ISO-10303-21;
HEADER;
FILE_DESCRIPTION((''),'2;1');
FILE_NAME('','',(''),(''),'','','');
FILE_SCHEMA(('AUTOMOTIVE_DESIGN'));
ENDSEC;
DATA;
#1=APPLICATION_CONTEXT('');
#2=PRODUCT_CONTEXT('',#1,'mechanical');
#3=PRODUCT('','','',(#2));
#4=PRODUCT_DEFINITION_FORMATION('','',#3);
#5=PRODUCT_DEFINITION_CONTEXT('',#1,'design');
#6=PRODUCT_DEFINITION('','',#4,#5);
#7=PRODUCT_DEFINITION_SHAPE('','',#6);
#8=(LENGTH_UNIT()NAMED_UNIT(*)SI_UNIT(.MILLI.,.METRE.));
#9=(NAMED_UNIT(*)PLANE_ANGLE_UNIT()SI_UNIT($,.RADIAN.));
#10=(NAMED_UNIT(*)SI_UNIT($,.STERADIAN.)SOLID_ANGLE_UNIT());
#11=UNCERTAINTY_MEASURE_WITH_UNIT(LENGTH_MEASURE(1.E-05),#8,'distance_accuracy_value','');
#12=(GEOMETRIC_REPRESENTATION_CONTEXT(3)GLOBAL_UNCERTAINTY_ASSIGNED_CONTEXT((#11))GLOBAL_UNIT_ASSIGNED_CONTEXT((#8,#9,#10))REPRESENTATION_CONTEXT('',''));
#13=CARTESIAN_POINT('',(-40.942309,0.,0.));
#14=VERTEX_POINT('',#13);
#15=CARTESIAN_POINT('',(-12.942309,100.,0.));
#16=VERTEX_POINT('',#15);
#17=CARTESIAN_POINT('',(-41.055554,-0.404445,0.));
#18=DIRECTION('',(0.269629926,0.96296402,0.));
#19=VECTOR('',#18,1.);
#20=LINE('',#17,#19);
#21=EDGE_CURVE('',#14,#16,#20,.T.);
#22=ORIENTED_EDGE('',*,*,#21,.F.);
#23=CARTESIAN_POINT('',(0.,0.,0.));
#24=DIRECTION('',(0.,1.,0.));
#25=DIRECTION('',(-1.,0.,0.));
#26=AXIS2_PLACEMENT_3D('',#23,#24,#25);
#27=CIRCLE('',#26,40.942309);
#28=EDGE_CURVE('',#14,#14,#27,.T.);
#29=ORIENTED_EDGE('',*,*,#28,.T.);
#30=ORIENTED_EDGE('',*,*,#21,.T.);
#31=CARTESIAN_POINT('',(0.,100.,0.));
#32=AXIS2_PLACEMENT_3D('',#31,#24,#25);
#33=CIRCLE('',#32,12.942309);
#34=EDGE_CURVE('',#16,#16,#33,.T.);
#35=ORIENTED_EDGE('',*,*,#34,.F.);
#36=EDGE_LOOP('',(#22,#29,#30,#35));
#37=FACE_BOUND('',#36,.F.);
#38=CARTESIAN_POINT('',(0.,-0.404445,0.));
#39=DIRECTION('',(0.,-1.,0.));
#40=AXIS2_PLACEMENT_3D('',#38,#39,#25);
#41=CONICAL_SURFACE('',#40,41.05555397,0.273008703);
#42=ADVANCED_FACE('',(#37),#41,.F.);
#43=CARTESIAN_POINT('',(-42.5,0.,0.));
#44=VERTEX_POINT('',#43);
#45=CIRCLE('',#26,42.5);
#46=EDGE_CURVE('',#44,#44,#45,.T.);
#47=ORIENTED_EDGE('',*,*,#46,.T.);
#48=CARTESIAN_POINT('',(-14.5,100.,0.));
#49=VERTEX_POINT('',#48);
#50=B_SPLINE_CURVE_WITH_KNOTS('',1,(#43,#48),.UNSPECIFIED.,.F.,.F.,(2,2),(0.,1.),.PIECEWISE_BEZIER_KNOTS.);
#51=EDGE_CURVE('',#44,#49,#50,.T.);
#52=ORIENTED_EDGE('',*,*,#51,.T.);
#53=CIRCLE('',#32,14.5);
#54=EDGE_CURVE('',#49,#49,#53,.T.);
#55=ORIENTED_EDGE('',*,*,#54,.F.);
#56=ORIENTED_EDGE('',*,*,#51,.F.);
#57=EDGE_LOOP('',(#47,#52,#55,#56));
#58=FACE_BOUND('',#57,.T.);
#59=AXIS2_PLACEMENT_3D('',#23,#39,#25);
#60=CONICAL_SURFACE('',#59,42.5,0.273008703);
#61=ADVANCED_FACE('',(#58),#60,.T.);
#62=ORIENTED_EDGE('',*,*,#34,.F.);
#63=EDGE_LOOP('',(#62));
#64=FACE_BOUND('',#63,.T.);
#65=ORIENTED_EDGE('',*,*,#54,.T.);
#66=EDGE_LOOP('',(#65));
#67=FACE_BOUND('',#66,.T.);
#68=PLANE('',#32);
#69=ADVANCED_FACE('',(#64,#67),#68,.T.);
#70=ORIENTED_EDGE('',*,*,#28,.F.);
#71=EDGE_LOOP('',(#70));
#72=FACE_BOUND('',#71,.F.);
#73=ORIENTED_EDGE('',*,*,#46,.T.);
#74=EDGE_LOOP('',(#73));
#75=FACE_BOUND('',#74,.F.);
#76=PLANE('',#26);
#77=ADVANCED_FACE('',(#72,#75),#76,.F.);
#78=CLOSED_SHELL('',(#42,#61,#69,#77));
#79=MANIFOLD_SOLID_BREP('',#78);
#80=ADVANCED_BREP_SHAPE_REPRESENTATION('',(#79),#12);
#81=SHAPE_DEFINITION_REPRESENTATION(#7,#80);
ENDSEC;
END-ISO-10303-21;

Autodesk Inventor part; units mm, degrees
ref_plane "YZ Plane" through (0, 0, 0) normal (1, 0, 0) x (0, 1, 0)
ref_plane "XY Plane" through (0, 0, 0) normal (0, 0, 1) x (1, 0, 0)
sketch "Szkic6" plane through (0, 0, 0) normal (0, 1, 0) x (-1, 0, 0)
  circle A0 centre (0, 0) radius 42.5
  dimension "d33" = 85
ref_plane "Płaszczyzna konstrukcyjna1" through (0, 100, 0) normal (0, 1, 0) x (-1, 0, 0)
sketch "Szkic7" plane through (0, 100, 0) normal (0, 1, 0) x (-1, 0, 0)
  circle A0 centre (0, 0) radius 14.5
  dimension "d35" = 29
loft "Wyciągnięcie złożone1" add profiles "Szkic6", "Szkic7"
shell "Skorupa1" thickness 1.5 removed faces 2 at (1.052, 100, -3.5603) at (10.6049, 0, 7.3037)
equation "\"d33\" = OD1"
equation "\"d35\" = OD2"
equation "\"d52\" = THK"
equation "\"SzerokośćGięciaPodcięcia\" = Grubość"
equation "\"RozmiarPodcięciaNarożnika\" = 4 * Grubość"
equation "\"PromieńPrzejścia\" = PromieńGięcia"
equation "\"Rozmiar_promienia_Jacobiego\" = PromieńGięcia"
equation "\"Wielk_odstępu\" = Grubość"
equation "\"d2\" = PromieńGięcia"
equation "\"d23\" = PromieńGięcia"
equation "\"OD1\" = 85"
equation "\"OD2\" = 29"
equation "\"THK\" = 1.5"
equation "\"Grubość\" = 1.5"
equation "\"PromieńGięcia\" = 3"
properties part number "Redukcja symetryczna Ø85x29x1,5 L=100" material "304"
